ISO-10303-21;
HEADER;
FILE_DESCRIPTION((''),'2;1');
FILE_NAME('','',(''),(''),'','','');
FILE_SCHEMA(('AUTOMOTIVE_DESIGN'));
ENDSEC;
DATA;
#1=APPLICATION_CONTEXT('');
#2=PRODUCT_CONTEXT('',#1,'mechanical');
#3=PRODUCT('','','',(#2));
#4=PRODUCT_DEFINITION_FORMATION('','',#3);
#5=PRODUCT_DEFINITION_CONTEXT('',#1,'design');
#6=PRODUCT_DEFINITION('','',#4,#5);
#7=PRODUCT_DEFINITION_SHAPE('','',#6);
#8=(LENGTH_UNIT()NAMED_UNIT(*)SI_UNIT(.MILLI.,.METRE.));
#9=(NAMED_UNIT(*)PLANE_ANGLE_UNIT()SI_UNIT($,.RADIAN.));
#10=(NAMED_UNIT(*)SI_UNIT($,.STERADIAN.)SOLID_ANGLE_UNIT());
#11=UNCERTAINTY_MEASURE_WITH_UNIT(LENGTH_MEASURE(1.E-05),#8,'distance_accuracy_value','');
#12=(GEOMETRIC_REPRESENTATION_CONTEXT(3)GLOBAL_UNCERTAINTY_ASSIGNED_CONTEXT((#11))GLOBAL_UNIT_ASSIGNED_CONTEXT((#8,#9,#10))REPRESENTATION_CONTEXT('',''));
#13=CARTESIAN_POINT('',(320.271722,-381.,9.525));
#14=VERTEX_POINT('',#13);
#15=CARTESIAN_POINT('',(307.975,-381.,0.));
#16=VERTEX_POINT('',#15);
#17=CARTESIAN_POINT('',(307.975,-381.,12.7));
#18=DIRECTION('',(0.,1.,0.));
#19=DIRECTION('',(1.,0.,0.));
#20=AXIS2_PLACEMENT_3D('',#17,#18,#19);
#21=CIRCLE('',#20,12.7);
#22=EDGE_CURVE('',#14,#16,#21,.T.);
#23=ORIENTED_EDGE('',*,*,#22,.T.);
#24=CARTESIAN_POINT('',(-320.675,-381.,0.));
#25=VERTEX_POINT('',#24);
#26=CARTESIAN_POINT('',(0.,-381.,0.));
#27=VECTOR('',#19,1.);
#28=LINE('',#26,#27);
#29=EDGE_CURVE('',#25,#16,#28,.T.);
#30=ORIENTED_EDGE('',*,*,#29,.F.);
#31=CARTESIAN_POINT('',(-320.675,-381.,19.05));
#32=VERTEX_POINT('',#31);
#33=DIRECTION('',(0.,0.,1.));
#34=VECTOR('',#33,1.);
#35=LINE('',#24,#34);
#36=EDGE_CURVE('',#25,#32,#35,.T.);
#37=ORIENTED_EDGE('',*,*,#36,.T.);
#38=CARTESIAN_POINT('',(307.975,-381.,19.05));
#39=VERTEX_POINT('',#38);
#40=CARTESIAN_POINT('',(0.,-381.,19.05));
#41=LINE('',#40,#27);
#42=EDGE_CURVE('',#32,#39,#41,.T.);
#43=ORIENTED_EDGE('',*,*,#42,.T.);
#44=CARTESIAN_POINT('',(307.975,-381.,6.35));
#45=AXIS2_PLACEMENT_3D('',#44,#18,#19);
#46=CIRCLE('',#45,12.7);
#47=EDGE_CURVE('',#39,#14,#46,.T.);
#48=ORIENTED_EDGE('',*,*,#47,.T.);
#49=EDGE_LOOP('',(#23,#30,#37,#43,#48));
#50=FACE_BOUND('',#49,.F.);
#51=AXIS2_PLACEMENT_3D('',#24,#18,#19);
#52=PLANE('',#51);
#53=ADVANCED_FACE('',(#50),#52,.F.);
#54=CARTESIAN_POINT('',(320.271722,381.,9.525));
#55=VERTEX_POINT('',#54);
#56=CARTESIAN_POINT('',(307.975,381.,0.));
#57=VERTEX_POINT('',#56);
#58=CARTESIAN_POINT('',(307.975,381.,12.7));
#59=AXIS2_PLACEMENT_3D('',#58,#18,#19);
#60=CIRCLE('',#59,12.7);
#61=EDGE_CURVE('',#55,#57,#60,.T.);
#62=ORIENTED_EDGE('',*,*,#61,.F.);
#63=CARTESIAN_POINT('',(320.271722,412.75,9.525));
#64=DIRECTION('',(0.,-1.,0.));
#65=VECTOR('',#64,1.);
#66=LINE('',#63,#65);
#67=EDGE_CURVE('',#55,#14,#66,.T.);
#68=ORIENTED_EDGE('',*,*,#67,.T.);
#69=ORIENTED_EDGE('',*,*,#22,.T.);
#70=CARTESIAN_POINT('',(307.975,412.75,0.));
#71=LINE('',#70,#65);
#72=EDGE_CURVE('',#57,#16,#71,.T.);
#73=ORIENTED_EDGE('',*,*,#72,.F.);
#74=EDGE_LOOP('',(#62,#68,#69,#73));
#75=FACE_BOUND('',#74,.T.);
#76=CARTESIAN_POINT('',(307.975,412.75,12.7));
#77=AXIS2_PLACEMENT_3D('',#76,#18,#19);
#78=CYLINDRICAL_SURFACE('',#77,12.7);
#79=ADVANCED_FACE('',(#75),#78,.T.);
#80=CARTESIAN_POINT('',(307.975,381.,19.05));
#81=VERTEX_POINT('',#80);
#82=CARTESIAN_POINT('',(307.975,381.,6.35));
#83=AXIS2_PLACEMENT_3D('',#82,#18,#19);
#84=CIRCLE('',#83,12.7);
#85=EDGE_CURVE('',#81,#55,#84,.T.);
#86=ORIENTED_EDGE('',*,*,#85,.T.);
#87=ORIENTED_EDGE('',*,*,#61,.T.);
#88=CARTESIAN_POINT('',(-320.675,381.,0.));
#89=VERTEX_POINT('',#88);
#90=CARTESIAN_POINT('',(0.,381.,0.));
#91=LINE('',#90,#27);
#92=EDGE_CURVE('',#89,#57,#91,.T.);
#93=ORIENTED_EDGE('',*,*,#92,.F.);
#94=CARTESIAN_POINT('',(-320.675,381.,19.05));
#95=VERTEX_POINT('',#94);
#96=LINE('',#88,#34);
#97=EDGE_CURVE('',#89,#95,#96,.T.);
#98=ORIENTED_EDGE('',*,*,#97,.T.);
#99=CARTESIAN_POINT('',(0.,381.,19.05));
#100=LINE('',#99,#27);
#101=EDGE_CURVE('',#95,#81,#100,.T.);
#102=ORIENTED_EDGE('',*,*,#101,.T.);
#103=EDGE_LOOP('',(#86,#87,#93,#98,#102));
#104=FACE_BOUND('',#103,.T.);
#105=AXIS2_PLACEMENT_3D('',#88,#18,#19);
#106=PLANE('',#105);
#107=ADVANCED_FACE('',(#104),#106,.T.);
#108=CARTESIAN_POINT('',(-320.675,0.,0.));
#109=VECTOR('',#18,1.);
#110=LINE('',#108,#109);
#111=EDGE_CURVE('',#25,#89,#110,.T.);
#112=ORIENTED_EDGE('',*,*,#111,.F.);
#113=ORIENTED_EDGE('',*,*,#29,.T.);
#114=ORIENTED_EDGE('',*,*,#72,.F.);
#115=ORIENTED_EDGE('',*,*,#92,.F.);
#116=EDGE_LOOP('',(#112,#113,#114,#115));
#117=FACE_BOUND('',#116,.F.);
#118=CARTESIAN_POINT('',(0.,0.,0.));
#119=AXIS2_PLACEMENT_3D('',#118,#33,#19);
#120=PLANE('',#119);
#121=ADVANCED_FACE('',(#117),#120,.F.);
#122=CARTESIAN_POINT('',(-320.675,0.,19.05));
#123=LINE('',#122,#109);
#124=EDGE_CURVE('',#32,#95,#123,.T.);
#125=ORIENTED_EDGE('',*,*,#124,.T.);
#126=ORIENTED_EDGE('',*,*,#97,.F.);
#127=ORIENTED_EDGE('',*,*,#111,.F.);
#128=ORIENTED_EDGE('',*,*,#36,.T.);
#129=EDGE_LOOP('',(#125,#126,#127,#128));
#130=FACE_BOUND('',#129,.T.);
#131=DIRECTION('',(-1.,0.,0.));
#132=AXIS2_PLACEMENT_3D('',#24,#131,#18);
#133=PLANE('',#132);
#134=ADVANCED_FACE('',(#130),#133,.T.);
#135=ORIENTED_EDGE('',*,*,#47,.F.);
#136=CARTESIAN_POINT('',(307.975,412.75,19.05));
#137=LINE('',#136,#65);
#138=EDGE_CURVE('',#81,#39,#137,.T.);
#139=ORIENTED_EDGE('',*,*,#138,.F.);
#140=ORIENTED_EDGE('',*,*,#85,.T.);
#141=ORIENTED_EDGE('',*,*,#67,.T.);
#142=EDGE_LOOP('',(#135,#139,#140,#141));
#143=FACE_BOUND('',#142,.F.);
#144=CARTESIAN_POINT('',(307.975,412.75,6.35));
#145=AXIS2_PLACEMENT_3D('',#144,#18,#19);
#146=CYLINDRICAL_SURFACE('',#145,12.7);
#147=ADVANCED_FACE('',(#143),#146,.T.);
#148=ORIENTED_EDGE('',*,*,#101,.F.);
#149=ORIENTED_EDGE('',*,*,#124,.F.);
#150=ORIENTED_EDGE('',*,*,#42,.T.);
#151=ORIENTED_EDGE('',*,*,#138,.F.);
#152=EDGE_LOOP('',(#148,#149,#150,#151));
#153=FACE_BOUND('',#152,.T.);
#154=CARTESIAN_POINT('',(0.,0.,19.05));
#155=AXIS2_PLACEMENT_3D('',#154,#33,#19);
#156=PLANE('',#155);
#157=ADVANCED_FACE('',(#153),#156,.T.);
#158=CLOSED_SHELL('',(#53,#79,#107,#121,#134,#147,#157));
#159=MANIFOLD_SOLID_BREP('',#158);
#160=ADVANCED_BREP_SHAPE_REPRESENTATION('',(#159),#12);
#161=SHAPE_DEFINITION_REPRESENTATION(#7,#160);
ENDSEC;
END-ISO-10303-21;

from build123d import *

# Parameters (mm, degrees)
F0_W        = 641.35
F0_H        = 762
F1_DEPTH    = 19.05
F2_T1_DEPTH = 825.5


# Not quite as in the source:
# - a fillet or chamfer that OpenCascade refuses, or shapes differently, is made with other operations: its cross-section is extruded or revolved along the edge and cut away or added


with BuildPart() as f1:
    # F0 (on Top) → F1 (new body)
    with BuildSketch(Plane.XY):
        Rectangle(F0_W, F0_H)
    extrude(amount=F1_DEPTH)

    # F2: fillet of radius 12.7 on 2 edges, made by hand

    # F2_s2 → F2_t1 (cut)
    with BuildSketch(Plane.XZ.offset(-412.75)):
        with BuildLine():
            ThreePointArc((320.675, 6.35), (316.9552561211, 15.3302561211), (307.975, 19.05))
            Line((307.975, 19.05), (320.675, 19.05))
            Line((320.675, 19.05), (320.675, 6.35))
        make_face()
        with BuildLine():
            ThreePointArc((320.675, 12.7), (316.9552561211, 3.7197438789), (307.975, 0))
            Line((307.975, 0), (320.675, 0))
            Line((320.675, 0), (320.675, 12.7))
        make_face()
    extrude(amount=F2_T1_DEPTH, mode=Mode.SUBTRACT)


solid = f1.part
